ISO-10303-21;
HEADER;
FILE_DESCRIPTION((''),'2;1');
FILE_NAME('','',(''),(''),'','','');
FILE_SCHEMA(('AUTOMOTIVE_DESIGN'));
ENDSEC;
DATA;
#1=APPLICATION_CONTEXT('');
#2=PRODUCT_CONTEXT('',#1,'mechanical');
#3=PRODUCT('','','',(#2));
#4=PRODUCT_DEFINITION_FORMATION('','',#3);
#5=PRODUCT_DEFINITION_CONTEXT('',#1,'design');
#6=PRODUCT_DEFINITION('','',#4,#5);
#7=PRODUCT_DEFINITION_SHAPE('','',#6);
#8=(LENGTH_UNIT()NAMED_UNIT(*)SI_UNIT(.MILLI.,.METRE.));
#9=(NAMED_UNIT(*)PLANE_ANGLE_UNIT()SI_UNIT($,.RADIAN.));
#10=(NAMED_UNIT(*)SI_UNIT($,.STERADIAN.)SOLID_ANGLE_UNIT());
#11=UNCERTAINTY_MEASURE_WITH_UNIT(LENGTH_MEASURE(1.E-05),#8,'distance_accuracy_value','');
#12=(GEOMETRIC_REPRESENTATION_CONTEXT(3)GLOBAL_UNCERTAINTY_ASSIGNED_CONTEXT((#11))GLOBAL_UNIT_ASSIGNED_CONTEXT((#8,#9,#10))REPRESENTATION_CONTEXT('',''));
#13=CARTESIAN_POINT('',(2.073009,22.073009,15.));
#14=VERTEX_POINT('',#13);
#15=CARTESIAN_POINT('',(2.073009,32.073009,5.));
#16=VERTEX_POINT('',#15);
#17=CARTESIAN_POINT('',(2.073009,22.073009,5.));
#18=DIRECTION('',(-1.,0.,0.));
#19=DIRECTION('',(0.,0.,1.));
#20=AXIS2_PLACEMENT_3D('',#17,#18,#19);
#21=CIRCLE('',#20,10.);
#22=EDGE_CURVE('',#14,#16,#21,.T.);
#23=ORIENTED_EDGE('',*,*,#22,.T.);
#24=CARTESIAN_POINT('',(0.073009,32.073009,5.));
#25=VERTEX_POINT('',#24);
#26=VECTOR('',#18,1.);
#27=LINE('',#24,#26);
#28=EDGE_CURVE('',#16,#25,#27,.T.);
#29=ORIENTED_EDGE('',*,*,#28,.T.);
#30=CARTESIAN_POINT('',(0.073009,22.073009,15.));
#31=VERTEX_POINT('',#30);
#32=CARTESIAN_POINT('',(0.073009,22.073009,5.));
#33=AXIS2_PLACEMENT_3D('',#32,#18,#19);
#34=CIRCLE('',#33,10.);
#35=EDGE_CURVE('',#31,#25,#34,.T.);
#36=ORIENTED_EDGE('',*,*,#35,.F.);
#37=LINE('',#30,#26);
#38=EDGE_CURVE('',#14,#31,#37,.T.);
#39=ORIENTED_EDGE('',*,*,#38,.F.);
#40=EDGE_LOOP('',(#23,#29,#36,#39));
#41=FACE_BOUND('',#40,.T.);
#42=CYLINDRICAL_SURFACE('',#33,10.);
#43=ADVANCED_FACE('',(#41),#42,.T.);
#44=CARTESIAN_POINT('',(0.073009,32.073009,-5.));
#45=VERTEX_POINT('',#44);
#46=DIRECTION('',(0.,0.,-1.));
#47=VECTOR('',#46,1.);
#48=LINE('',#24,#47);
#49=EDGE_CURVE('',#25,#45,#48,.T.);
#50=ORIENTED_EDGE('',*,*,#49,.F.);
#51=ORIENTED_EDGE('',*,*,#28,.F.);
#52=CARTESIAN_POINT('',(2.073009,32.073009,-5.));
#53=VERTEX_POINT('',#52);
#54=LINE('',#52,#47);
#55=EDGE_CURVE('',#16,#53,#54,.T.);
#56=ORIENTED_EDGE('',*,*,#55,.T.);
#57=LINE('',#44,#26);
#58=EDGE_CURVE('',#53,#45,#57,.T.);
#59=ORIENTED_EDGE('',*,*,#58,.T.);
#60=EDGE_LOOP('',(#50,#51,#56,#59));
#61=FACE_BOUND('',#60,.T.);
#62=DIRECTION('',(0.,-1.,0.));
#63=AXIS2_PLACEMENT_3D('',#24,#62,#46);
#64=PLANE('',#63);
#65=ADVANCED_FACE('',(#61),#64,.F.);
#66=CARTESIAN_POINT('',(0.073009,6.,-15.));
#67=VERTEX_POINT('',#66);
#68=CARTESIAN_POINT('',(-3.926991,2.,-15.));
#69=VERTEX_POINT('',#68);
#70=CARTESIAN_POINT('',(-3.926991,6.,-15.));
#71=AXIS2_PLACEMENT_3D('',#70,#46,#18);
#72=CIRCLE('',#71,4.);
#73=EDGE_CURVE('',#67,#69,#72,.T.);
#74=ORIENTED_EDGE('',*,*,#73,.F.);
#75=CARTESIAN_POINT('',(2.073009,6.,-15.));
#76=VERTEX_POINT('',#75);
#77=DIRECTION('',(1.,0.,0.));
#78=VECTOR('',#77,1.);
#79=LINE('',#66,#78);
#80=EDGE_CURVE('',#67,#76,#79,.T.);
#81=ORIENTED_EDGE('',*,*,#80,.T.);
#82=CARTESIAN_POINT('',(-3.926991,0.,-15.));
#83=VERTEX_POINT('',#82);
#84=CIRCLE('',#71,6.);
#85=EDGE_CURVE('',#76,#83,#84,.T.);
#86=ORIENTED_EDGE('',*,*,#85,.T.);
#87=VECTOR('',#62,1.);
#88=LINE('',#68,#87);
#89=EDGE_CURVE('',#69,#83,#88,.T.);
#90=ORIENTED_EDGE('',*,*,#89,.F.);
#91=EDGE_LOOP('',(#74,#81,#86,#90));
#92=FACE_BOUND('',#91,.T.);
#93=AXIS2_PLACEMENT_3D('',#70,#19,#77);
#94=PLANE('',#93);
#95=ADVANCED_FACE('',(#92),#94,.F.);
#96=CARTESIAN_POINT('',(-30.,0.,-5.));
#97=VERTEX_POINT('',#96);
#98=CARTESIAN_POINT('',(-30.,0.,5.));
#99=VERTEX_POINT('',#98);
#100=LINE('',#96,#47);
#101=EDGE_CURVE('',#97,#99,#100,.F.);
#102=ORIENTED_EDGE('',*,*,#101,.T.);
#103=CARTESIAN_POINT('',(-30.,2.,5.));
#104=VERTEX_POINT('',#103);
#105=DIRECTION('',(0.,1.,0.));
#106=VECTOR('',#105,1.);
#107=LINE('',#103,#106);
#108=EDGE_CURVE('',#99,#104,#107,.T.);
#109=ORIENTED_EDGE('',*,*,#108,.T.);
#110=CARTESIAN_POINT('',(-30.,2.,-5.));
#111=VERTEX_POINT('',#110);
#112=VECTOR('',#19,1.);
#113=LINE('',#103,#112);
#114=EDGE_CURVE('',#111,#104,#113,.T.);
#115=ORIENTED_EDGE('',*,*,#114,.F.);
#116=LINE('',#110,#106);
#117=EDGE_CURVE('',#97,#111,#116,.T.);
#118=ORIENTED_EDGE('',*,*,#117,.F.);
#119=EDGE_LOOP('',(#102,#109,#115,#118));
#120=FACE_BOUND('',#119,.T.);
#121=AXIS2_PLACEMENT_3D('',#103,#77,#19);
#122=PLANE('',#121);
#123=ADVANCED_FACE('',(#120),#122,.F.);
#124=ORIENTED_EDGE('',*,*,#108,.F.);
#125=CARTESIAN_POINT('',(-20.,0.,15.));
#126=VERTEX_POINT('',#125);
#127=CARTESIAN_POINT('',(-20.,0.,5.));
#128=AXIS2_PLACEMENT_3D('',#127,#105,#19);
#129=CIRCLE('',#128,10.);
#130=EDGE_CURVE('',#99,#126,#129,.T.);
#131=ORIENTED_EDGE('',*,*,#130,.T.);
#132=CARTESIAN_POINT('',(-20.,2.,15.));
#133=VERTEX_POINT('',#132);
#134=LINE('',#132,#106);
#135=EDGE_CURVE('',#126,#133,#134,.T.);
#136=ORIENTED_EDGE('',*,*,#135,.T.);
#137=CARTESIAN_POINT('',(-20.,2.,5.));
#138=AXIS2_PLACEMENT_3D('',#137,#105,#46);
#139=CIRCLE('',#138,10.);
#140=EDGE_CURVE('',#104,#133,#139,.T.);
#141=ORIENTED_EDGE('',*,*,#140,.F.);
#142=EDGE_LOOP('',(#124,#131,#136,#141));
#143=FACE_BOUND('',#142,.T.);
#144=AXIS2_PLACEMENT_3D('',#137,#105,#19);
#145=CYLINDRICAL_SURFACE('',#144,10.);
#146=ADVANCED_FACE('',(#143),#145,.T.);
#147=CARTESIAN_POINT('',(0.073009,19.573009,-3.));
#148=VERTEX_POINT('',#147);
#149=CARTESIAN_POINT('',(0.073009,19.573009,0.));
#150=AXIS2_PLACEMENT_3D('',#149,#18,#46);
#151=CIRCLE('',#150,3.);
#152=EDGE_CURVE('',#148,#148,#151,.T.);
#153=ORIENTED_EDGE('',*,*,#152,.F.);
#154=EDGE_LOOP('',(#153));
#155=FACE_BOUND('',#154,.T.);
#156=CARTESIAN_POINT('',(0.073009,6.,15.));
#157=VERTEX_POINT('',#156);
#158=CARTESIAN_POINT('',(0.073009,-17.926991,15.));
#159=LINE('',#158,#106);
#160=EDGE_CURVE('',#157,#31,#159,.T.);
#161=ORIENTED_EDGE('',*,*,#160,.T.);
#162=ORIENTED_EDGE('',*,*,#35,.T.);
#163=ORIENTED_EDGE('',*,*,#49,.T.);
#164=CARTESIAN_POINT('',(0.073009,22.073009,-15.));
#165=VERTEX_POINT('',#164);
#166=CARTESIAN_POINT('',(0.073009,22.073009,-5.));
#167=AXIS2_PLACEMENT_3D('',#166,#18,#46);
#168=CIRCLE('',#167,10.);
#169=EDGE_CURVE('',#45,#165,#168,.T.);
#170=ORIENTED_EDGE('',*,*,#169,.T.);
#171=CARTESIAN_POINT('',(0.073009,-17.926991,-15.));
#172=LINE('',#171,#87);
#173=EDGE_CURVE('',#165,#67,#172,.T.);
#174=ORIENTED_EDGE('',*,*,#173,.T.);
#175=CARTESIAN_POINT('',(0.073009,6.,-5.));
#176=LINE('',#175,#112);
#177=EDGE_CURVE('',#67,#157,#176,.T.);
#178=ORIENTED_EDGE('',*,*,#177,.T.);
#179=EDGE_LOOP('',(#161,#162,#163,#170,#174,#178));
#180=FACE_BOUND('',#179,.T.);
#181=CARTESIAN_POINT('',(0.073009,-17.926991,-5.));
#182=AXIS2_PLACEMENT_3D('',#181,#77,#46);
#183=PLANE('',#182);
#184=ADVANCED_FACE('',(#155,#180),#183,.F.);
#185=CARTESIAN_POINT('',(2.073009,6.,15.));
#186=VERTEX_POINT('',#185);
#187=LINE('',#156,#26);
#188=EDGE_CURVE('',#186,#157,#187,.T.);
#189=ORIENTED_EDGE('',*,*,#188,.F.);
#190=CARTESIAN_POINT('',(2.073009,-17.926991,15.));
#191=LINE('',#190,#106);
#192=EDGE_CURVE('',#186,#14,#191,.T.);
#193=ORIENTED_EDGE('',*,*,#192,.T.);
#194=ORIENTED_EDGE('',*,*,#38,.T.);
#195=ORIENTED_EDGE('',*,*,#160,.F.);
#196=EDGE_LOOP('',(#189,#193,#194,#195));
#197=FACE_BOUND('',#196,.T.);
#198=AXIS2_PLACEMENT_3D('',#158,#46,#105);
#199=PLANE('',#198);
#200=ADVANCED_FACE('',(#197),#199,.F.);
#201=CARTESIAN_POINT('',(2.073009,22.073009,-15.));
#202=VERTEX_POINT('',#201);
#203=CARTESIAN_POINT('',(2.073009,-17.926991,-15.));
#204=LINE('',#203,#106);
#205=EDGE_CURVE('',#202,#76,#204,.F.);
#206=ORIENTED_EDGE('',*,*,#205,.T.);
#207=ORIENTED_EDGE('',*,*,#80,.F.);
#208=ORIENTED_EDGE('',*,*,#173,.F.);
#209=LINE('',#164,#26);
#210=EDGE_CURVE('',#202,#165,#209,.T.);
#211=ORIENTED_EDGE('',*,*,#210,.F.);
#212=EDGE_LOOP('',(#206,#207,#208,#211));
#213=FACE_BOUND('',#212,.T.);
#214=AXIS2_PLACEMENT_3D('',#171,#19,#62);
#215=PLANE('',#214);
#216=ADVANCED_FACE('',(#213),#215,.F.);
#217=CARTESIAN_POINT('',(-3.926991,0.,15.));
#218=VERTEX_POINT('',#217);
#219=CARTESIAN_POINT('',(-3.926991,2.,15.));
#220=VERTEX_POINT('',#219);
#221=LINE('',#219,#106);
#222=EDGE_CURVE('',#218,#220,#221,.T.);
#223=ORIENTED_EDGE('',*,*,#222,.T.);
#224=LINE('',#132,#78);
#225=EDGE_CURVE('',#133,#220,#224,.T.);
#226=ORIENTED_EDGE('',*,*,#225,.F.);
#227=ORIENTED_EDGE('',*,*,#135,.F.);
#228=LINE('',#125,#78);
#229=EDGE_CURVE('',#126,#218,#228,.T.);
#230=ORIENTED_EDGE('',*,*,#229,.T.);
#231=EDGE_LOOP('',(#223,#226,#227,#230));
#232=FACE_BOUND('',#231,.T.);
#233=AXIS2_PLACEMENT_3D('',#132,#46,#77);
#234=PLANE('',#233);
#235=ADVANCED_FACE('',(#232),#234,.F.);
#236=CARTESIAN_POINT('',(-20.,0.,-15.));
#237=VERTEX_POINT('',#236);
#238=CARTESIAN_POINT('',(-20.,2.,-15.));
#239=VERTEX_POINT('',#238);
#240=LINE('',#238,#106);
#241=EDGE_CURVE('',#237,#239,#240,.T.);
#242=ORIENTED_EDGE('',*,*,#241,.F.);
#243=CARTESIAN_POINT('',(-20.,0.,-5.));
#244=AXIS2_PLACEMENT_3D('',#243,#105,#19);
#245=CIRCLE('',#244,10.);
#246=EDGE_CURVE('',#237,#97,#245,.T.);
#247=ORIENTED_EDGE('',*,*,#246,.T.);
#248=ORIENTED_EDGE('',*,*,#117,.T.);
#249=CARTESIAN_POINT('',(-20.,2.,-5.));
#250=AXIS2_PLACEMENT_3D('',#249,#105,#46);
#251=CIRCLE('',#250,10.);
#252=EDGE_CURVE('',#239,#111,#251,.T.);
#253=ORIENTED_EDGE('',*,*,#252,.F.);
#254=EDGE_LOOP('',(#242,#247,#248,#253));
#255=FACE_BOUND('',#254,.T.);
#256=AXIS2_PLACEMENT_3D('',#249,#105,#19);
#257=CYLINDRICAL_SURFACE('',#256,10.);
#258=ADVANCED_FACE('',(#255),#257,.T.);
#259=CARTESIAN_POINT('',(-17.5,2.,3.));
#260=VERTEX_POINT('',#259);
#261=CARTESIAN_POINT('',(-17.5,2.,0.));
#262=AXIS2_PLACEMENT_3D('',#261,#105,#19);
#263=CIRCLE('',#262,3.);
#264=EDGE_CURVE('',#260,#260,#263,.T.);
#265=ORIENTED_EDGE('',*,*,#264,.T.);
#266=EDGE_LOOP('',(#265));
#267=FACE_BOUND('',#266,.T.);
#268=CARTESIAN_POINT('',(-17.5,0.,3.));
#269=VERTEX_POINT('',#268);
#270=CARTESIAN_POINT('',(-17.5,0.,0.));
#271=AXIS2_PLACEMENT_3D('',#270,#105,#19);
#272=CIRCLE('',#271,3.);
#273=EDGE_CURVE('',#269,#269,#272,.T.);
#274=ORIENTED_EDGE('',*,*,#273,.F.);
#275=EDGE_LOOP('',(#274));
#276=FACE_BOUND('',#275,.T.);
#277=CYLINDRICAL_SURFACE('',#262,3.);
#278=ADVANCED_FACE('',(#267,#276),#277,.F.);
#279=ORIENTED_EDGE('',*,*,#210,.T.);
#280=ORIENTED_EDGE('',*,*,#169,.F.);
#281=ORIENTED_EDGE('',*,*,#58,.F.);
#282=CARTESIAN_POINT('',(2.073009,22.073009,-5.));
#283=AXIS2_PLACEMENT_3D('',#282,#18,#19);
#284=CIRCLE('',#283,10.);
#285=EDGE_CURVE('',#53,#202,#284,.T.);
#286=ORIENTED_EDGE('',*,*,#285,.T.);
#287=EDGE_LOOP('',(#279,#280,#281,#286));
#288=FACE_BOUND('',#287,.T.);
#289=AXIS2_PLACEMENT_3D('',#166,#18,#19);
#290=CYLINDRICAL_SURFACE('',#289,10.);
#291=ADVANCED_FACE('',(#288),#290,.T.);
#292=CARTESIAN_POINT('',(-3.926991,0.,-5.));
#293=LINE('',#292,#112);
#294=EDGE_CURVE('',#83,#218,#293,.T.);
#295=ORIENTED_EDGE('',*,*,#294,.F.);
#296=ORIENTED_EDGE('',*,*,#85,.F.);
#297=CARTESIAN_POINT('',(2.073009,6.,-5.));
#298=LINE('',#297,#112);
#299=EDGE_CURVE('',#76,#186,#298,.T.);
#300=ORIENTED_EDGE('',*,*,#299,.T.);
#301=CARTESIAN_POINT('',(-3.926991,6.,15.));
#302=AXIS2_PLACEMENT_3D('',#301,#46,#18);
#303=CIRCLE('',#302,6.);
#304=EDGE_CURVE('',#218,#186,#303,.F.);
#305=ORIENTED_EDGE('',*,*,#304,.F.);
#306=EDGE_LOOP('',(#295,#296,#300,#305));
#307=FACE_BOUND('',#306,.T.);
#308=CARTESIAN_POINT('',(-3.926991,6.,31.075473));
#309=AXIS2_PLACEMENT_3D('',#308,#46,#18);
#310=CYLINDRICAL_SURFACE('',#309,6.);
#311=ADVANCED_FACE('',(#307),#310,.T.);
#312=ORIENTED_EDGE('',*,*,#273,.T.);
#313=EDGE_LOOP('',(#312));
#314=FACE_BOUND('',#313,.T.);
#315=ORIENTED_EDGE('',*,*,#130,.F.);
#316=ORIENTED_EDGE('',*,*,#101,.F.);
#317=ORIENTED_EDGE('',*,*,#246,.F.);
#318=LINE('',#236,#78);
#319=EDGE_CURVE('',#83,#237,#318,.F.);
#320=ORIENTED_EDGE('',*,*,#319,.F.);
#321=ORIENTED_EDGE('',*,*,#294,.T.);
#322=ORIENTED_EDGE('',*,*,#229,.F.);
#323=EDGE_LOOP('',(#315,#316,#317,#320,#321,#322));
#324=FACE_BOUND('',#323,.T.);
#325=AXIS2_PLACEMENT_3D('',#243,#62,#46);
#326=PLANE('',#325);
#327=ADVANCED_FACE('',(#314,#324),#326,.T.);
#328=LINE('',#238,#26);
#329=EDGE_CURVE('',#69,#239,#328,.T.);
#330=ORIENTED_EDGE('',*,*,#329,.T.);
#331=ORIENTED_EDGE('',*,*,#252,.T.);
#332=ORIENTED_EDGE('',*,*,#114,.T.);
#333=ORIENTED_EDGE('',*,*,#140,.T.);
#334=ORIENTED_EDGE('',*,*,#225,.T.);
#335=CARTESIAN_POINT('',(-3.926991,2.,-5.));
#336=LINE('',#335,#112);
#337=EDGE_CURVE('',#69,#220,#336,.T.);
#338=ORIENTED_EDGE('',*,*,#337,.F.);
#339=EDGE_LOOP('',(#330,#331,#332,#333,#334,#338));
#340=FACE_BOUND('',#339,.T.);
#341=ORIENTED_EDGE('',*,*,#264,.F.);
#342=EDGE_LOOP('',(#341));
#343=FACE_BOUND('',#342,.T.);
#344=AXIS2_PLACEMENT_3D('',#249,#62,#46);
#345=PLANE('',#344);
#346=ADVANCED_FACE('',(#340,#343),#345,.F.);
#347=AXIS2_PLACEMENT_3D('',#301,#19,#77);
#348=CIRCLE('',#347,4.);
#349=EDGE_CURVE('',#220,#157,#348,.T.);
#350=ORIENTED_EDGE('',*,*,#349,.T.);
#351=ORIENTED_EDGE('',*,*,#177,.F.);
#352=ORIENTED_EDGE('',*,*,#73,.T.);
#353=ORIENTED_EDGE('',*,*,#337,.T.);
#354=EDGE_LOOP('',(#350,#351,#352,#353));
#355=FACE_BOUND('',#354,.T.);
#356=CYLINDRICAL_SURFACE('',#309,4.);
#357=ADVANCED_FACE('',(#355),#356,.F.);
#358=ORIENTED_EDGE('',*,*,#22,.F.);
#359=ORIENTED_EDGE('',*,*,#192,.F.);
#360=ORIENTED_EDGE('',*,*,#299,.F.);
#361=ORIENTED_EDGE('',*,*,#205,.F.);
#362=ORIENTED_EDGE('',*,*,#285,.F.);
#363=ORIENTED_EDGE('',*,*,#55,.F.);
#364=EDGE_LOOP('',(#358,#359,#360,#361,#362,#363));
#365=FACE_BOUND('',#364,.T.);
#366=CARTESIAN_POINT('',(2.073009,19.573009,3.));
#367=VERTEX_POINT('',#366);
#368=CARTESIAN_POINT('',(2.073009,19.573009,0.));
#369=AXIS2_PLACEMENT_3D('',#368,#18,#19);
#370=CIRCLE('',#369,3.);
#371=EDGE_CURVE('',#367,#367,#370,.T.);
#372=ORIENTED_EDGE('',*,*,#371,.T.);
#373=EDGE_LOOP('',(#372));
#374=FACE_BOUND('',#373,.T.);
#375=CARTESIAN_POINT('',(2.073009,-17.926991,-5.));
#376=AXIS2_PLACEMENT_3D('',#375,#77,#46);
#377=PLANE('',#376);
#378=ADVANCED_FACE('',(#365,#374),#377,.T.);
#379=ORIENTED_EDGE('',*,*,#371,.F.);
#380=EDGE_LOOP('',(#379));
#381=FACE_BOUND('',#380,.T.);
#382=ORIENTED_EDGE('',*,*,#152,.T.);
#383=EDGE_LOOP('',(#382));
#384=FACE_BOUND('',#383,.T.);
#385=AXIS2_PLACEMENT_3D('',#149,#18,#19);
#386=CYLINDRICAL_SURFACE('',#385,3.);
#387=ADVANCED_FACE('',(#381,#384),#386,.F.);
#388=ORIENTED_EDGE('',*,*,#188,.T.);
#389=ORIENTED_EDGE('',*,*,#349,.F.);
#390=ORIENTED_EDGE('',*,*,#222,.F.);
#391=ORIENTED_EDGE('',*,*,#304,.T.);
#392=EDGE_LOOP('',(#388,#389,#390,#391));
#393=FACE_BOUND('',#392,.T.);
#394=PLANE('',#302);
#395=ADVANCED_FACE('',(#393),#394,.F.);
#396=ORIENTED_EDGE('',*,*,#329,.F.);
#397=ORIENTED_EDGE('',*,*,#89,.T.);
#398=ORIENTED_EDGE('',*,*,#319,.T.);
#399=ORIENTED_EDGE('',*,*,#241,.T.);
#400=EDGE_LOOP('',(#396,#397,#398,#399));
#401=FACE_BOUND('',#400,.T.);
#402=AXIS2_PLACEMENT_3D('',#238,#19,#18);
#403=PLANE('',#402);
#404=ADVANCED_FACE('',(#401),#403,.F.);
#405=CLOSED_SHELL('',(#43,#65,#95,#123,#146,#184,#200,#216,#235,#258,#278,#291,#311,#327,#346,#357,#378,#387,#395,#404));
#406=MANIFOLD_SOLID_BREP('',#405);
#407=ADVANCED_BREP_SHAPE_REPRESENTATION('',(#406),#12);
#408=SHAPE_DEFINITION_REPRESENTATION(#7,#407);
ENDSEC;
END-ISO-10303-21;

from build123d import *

# Parameters (mm, degrees)
SKETCH1_R                  = 3
EXTRUDE2_DEPTH             = 2
SKETCHED_START             = 1.456569183
SKETCHED_BEND1_OUTLINE_W   = 2
SKETCHED_BEND1_OUTLINE_H   = 30
SKETCHED_BEND1_DEPTH       = 28.543430817
SKETCHED_START_2           = 0.073009183
SKETCHED_BEND1_2_OUTLINE_R = 3
SKETCHED_BEND1_2_DEPTH     = 0.036590817
SKETCHED_START_3           = 0.608704599
SKETCHED_BEND1_3_OUTLINE_W = 2
SKETCHED_BEND1_3_OUTLINE_H = 30
SKETCHED_BEND1_3_DEPTH     = 0.847864584
SKETCHED_START_4           = -3.926990817
SKETCHED_BEND1_4_OUTLINE_R = 3
SKETCHED_BEND1_4_DEPTH     = 6
SKETCHED_START_5           = -15
SKETCHED_BEND1_5_DEPTH     = 30


with BuildPart() as part:
    # Sketch1 → Extrude2 (new body)
    with BuildSketch(Plane(origin=(0, 0, 0), x_dir=(1, 0, 0), z_dir=(0, 1, 0))):
        with BuildLine():
            Line((-20, -15), (20, -15))
            ThreePointArc((20, -15), (27.071067812, -12.071067812), (30, -5))
            Line((30, -5), (30, 5))
            ThreePointArc((30, 5), (27.071067812, 12.071067812), (20, 15))
            Line((20, 15), (-20, 15))
            ThreePointArc((-20, 15), (-27.071067812, 12.071067812), (-30, 5))
            Line((-30, 5), (-30, -5))
            ThreePointArc((-30, -5), (-27.071067812, -12.071067812), (-20, -15))
        make_face()
        with Locations(Location((-17.5, 0, 0), (0, 0, 270))):
            Circle(SKETCH1_R, mode=Mode.SUBTRACT)
        with Locations(Location((17.5, 0, 0), (0, 0, 90))):
            Circle(SKETCH1_R, mode=Mode.SUBTRACT)
    extrude(amount=EXTRUDE2_DEPTH)

    # Sketched Bend1: read off the stored shape, not the designer's step
    # Sketched Bend1 outline → Sketched Bend1 (cut)
    with BuildSketch(Plane.YZ.offset(SKETCHED_START)):
        with Locations((1, 0)):
            Rectangle(SKETCHED_BEND1_OUTLINE_W, SKETCHED_BEND1_OUTLINE_H)
    extrude(amount=SKETCHED_BEND1_DEPTH, mode=Mode.SUBTRACT)

    # Sketched Bend1 2 outline → Sketched Bend1 2 (add)
    with BuildSketch(Plane.YZ.offset(SKETCHED_START_2)):
        with BuildLine():
            Line((22.073009183, 15), (2, 15))
            Line((2, 15), (2, -15))
            Line((2, -15), (22.073009183, -15))
            ThreePointArc((22.073009183, -15), (29.144076995, -12.071067812), (32.073009183, -5))
            Line((32.073009183, -5), (32.073009183, 5))
            ThreePointArc((32.073009183, 5), (29.144076995, 12.071067812), (22.073009183, 15))
        make_face()
        with Locations((19.573009183, 0)):
            Circle(SKETCHED_BEND1_2_OUTLINE_R, mode=Mode.SUBTRACT)
    extrude(amount=SKETCHED_BEND1_2_DEPTH)

    # Sketched Bend1 3 outline → Sketched Bend1 3 (cut)
    with BuildSketch(Plane.YZ.offset(SKETCHED_START_3)):
        with Locations((1, 0)):
            Rectangle(SKETCHED_BEND1_3_OUTLINE_W, SKETCHED_BEND1_3_OUTLINE_H)
    extrude(amount=SKETCHED_BEND1_3_DEPTH, mode=Mode.SUBTRACT)

    # Sketched Bend1 4 outline → Sketched Bend1 4 (add)
    with BuildSketch(Plane.YZ.offset(SKETCHED_START_4)):
        with BuildLine():
            Line((22.073009183, 15), (2, 15))
            Line((2, 15), (2, -15))
            Line((2, -15), (22.073009183, -15))
            ThreePointArc((22.073009183, -15), (29.144076995, -12.071067812), (32.073009183, -5))
            Line((32.073009183, -5), (32.073009183, 5))
            ThreePointArc((32.073009183, 5), (29.144076995, 12.071067812), (22.073009183, 15))
        make_face()
        with Locations((19.573009183, 0)):
            Circle(SKETCHED_BEND1_4_OUTLINE_R, mode=Mode.SUBTRACT)
    extrude(amount=SKETCHED_BEND1_4_DEPTH)

    # Sketched Bend1 5 outline → Sketched Bend1 5 (cut)
    with BuildSketch(Plane.XY.offset(SKETCHED_START_5)):
        with BuildLine():
            ThreePointArc((-3.926990817, 2), (-1.098563692, 3.171572875), (0.073009183, 6))
            Line((0.073009183, 6), (0.073009183, 32.073009183))
            Line((0.073009183, 32.073009183), (-3.926990817, 32.073009183))
            Line((-3.926990817, 32.073009183), (-3.926990817, 2))
        make_face()
        with BuildLine():
            Line((2.073009183, 2), (2.073009183, 6))
            ThreePointArc((2.073009183, 6), (0.31564987, 1.757359313), (-3.926990817, 0))
            Line((-3.926990817, 0), (0.608704599, 0))
            Line((0.608704599, 0), (0.608704599, 2))
            Line((0.608704599, 2), (2.073009183, 2))
        make_face()
    extrude(amount=SKETCHED_BEND1_5_DEPTH, mode=Mode.SUBTRACT)


solid = part.part
